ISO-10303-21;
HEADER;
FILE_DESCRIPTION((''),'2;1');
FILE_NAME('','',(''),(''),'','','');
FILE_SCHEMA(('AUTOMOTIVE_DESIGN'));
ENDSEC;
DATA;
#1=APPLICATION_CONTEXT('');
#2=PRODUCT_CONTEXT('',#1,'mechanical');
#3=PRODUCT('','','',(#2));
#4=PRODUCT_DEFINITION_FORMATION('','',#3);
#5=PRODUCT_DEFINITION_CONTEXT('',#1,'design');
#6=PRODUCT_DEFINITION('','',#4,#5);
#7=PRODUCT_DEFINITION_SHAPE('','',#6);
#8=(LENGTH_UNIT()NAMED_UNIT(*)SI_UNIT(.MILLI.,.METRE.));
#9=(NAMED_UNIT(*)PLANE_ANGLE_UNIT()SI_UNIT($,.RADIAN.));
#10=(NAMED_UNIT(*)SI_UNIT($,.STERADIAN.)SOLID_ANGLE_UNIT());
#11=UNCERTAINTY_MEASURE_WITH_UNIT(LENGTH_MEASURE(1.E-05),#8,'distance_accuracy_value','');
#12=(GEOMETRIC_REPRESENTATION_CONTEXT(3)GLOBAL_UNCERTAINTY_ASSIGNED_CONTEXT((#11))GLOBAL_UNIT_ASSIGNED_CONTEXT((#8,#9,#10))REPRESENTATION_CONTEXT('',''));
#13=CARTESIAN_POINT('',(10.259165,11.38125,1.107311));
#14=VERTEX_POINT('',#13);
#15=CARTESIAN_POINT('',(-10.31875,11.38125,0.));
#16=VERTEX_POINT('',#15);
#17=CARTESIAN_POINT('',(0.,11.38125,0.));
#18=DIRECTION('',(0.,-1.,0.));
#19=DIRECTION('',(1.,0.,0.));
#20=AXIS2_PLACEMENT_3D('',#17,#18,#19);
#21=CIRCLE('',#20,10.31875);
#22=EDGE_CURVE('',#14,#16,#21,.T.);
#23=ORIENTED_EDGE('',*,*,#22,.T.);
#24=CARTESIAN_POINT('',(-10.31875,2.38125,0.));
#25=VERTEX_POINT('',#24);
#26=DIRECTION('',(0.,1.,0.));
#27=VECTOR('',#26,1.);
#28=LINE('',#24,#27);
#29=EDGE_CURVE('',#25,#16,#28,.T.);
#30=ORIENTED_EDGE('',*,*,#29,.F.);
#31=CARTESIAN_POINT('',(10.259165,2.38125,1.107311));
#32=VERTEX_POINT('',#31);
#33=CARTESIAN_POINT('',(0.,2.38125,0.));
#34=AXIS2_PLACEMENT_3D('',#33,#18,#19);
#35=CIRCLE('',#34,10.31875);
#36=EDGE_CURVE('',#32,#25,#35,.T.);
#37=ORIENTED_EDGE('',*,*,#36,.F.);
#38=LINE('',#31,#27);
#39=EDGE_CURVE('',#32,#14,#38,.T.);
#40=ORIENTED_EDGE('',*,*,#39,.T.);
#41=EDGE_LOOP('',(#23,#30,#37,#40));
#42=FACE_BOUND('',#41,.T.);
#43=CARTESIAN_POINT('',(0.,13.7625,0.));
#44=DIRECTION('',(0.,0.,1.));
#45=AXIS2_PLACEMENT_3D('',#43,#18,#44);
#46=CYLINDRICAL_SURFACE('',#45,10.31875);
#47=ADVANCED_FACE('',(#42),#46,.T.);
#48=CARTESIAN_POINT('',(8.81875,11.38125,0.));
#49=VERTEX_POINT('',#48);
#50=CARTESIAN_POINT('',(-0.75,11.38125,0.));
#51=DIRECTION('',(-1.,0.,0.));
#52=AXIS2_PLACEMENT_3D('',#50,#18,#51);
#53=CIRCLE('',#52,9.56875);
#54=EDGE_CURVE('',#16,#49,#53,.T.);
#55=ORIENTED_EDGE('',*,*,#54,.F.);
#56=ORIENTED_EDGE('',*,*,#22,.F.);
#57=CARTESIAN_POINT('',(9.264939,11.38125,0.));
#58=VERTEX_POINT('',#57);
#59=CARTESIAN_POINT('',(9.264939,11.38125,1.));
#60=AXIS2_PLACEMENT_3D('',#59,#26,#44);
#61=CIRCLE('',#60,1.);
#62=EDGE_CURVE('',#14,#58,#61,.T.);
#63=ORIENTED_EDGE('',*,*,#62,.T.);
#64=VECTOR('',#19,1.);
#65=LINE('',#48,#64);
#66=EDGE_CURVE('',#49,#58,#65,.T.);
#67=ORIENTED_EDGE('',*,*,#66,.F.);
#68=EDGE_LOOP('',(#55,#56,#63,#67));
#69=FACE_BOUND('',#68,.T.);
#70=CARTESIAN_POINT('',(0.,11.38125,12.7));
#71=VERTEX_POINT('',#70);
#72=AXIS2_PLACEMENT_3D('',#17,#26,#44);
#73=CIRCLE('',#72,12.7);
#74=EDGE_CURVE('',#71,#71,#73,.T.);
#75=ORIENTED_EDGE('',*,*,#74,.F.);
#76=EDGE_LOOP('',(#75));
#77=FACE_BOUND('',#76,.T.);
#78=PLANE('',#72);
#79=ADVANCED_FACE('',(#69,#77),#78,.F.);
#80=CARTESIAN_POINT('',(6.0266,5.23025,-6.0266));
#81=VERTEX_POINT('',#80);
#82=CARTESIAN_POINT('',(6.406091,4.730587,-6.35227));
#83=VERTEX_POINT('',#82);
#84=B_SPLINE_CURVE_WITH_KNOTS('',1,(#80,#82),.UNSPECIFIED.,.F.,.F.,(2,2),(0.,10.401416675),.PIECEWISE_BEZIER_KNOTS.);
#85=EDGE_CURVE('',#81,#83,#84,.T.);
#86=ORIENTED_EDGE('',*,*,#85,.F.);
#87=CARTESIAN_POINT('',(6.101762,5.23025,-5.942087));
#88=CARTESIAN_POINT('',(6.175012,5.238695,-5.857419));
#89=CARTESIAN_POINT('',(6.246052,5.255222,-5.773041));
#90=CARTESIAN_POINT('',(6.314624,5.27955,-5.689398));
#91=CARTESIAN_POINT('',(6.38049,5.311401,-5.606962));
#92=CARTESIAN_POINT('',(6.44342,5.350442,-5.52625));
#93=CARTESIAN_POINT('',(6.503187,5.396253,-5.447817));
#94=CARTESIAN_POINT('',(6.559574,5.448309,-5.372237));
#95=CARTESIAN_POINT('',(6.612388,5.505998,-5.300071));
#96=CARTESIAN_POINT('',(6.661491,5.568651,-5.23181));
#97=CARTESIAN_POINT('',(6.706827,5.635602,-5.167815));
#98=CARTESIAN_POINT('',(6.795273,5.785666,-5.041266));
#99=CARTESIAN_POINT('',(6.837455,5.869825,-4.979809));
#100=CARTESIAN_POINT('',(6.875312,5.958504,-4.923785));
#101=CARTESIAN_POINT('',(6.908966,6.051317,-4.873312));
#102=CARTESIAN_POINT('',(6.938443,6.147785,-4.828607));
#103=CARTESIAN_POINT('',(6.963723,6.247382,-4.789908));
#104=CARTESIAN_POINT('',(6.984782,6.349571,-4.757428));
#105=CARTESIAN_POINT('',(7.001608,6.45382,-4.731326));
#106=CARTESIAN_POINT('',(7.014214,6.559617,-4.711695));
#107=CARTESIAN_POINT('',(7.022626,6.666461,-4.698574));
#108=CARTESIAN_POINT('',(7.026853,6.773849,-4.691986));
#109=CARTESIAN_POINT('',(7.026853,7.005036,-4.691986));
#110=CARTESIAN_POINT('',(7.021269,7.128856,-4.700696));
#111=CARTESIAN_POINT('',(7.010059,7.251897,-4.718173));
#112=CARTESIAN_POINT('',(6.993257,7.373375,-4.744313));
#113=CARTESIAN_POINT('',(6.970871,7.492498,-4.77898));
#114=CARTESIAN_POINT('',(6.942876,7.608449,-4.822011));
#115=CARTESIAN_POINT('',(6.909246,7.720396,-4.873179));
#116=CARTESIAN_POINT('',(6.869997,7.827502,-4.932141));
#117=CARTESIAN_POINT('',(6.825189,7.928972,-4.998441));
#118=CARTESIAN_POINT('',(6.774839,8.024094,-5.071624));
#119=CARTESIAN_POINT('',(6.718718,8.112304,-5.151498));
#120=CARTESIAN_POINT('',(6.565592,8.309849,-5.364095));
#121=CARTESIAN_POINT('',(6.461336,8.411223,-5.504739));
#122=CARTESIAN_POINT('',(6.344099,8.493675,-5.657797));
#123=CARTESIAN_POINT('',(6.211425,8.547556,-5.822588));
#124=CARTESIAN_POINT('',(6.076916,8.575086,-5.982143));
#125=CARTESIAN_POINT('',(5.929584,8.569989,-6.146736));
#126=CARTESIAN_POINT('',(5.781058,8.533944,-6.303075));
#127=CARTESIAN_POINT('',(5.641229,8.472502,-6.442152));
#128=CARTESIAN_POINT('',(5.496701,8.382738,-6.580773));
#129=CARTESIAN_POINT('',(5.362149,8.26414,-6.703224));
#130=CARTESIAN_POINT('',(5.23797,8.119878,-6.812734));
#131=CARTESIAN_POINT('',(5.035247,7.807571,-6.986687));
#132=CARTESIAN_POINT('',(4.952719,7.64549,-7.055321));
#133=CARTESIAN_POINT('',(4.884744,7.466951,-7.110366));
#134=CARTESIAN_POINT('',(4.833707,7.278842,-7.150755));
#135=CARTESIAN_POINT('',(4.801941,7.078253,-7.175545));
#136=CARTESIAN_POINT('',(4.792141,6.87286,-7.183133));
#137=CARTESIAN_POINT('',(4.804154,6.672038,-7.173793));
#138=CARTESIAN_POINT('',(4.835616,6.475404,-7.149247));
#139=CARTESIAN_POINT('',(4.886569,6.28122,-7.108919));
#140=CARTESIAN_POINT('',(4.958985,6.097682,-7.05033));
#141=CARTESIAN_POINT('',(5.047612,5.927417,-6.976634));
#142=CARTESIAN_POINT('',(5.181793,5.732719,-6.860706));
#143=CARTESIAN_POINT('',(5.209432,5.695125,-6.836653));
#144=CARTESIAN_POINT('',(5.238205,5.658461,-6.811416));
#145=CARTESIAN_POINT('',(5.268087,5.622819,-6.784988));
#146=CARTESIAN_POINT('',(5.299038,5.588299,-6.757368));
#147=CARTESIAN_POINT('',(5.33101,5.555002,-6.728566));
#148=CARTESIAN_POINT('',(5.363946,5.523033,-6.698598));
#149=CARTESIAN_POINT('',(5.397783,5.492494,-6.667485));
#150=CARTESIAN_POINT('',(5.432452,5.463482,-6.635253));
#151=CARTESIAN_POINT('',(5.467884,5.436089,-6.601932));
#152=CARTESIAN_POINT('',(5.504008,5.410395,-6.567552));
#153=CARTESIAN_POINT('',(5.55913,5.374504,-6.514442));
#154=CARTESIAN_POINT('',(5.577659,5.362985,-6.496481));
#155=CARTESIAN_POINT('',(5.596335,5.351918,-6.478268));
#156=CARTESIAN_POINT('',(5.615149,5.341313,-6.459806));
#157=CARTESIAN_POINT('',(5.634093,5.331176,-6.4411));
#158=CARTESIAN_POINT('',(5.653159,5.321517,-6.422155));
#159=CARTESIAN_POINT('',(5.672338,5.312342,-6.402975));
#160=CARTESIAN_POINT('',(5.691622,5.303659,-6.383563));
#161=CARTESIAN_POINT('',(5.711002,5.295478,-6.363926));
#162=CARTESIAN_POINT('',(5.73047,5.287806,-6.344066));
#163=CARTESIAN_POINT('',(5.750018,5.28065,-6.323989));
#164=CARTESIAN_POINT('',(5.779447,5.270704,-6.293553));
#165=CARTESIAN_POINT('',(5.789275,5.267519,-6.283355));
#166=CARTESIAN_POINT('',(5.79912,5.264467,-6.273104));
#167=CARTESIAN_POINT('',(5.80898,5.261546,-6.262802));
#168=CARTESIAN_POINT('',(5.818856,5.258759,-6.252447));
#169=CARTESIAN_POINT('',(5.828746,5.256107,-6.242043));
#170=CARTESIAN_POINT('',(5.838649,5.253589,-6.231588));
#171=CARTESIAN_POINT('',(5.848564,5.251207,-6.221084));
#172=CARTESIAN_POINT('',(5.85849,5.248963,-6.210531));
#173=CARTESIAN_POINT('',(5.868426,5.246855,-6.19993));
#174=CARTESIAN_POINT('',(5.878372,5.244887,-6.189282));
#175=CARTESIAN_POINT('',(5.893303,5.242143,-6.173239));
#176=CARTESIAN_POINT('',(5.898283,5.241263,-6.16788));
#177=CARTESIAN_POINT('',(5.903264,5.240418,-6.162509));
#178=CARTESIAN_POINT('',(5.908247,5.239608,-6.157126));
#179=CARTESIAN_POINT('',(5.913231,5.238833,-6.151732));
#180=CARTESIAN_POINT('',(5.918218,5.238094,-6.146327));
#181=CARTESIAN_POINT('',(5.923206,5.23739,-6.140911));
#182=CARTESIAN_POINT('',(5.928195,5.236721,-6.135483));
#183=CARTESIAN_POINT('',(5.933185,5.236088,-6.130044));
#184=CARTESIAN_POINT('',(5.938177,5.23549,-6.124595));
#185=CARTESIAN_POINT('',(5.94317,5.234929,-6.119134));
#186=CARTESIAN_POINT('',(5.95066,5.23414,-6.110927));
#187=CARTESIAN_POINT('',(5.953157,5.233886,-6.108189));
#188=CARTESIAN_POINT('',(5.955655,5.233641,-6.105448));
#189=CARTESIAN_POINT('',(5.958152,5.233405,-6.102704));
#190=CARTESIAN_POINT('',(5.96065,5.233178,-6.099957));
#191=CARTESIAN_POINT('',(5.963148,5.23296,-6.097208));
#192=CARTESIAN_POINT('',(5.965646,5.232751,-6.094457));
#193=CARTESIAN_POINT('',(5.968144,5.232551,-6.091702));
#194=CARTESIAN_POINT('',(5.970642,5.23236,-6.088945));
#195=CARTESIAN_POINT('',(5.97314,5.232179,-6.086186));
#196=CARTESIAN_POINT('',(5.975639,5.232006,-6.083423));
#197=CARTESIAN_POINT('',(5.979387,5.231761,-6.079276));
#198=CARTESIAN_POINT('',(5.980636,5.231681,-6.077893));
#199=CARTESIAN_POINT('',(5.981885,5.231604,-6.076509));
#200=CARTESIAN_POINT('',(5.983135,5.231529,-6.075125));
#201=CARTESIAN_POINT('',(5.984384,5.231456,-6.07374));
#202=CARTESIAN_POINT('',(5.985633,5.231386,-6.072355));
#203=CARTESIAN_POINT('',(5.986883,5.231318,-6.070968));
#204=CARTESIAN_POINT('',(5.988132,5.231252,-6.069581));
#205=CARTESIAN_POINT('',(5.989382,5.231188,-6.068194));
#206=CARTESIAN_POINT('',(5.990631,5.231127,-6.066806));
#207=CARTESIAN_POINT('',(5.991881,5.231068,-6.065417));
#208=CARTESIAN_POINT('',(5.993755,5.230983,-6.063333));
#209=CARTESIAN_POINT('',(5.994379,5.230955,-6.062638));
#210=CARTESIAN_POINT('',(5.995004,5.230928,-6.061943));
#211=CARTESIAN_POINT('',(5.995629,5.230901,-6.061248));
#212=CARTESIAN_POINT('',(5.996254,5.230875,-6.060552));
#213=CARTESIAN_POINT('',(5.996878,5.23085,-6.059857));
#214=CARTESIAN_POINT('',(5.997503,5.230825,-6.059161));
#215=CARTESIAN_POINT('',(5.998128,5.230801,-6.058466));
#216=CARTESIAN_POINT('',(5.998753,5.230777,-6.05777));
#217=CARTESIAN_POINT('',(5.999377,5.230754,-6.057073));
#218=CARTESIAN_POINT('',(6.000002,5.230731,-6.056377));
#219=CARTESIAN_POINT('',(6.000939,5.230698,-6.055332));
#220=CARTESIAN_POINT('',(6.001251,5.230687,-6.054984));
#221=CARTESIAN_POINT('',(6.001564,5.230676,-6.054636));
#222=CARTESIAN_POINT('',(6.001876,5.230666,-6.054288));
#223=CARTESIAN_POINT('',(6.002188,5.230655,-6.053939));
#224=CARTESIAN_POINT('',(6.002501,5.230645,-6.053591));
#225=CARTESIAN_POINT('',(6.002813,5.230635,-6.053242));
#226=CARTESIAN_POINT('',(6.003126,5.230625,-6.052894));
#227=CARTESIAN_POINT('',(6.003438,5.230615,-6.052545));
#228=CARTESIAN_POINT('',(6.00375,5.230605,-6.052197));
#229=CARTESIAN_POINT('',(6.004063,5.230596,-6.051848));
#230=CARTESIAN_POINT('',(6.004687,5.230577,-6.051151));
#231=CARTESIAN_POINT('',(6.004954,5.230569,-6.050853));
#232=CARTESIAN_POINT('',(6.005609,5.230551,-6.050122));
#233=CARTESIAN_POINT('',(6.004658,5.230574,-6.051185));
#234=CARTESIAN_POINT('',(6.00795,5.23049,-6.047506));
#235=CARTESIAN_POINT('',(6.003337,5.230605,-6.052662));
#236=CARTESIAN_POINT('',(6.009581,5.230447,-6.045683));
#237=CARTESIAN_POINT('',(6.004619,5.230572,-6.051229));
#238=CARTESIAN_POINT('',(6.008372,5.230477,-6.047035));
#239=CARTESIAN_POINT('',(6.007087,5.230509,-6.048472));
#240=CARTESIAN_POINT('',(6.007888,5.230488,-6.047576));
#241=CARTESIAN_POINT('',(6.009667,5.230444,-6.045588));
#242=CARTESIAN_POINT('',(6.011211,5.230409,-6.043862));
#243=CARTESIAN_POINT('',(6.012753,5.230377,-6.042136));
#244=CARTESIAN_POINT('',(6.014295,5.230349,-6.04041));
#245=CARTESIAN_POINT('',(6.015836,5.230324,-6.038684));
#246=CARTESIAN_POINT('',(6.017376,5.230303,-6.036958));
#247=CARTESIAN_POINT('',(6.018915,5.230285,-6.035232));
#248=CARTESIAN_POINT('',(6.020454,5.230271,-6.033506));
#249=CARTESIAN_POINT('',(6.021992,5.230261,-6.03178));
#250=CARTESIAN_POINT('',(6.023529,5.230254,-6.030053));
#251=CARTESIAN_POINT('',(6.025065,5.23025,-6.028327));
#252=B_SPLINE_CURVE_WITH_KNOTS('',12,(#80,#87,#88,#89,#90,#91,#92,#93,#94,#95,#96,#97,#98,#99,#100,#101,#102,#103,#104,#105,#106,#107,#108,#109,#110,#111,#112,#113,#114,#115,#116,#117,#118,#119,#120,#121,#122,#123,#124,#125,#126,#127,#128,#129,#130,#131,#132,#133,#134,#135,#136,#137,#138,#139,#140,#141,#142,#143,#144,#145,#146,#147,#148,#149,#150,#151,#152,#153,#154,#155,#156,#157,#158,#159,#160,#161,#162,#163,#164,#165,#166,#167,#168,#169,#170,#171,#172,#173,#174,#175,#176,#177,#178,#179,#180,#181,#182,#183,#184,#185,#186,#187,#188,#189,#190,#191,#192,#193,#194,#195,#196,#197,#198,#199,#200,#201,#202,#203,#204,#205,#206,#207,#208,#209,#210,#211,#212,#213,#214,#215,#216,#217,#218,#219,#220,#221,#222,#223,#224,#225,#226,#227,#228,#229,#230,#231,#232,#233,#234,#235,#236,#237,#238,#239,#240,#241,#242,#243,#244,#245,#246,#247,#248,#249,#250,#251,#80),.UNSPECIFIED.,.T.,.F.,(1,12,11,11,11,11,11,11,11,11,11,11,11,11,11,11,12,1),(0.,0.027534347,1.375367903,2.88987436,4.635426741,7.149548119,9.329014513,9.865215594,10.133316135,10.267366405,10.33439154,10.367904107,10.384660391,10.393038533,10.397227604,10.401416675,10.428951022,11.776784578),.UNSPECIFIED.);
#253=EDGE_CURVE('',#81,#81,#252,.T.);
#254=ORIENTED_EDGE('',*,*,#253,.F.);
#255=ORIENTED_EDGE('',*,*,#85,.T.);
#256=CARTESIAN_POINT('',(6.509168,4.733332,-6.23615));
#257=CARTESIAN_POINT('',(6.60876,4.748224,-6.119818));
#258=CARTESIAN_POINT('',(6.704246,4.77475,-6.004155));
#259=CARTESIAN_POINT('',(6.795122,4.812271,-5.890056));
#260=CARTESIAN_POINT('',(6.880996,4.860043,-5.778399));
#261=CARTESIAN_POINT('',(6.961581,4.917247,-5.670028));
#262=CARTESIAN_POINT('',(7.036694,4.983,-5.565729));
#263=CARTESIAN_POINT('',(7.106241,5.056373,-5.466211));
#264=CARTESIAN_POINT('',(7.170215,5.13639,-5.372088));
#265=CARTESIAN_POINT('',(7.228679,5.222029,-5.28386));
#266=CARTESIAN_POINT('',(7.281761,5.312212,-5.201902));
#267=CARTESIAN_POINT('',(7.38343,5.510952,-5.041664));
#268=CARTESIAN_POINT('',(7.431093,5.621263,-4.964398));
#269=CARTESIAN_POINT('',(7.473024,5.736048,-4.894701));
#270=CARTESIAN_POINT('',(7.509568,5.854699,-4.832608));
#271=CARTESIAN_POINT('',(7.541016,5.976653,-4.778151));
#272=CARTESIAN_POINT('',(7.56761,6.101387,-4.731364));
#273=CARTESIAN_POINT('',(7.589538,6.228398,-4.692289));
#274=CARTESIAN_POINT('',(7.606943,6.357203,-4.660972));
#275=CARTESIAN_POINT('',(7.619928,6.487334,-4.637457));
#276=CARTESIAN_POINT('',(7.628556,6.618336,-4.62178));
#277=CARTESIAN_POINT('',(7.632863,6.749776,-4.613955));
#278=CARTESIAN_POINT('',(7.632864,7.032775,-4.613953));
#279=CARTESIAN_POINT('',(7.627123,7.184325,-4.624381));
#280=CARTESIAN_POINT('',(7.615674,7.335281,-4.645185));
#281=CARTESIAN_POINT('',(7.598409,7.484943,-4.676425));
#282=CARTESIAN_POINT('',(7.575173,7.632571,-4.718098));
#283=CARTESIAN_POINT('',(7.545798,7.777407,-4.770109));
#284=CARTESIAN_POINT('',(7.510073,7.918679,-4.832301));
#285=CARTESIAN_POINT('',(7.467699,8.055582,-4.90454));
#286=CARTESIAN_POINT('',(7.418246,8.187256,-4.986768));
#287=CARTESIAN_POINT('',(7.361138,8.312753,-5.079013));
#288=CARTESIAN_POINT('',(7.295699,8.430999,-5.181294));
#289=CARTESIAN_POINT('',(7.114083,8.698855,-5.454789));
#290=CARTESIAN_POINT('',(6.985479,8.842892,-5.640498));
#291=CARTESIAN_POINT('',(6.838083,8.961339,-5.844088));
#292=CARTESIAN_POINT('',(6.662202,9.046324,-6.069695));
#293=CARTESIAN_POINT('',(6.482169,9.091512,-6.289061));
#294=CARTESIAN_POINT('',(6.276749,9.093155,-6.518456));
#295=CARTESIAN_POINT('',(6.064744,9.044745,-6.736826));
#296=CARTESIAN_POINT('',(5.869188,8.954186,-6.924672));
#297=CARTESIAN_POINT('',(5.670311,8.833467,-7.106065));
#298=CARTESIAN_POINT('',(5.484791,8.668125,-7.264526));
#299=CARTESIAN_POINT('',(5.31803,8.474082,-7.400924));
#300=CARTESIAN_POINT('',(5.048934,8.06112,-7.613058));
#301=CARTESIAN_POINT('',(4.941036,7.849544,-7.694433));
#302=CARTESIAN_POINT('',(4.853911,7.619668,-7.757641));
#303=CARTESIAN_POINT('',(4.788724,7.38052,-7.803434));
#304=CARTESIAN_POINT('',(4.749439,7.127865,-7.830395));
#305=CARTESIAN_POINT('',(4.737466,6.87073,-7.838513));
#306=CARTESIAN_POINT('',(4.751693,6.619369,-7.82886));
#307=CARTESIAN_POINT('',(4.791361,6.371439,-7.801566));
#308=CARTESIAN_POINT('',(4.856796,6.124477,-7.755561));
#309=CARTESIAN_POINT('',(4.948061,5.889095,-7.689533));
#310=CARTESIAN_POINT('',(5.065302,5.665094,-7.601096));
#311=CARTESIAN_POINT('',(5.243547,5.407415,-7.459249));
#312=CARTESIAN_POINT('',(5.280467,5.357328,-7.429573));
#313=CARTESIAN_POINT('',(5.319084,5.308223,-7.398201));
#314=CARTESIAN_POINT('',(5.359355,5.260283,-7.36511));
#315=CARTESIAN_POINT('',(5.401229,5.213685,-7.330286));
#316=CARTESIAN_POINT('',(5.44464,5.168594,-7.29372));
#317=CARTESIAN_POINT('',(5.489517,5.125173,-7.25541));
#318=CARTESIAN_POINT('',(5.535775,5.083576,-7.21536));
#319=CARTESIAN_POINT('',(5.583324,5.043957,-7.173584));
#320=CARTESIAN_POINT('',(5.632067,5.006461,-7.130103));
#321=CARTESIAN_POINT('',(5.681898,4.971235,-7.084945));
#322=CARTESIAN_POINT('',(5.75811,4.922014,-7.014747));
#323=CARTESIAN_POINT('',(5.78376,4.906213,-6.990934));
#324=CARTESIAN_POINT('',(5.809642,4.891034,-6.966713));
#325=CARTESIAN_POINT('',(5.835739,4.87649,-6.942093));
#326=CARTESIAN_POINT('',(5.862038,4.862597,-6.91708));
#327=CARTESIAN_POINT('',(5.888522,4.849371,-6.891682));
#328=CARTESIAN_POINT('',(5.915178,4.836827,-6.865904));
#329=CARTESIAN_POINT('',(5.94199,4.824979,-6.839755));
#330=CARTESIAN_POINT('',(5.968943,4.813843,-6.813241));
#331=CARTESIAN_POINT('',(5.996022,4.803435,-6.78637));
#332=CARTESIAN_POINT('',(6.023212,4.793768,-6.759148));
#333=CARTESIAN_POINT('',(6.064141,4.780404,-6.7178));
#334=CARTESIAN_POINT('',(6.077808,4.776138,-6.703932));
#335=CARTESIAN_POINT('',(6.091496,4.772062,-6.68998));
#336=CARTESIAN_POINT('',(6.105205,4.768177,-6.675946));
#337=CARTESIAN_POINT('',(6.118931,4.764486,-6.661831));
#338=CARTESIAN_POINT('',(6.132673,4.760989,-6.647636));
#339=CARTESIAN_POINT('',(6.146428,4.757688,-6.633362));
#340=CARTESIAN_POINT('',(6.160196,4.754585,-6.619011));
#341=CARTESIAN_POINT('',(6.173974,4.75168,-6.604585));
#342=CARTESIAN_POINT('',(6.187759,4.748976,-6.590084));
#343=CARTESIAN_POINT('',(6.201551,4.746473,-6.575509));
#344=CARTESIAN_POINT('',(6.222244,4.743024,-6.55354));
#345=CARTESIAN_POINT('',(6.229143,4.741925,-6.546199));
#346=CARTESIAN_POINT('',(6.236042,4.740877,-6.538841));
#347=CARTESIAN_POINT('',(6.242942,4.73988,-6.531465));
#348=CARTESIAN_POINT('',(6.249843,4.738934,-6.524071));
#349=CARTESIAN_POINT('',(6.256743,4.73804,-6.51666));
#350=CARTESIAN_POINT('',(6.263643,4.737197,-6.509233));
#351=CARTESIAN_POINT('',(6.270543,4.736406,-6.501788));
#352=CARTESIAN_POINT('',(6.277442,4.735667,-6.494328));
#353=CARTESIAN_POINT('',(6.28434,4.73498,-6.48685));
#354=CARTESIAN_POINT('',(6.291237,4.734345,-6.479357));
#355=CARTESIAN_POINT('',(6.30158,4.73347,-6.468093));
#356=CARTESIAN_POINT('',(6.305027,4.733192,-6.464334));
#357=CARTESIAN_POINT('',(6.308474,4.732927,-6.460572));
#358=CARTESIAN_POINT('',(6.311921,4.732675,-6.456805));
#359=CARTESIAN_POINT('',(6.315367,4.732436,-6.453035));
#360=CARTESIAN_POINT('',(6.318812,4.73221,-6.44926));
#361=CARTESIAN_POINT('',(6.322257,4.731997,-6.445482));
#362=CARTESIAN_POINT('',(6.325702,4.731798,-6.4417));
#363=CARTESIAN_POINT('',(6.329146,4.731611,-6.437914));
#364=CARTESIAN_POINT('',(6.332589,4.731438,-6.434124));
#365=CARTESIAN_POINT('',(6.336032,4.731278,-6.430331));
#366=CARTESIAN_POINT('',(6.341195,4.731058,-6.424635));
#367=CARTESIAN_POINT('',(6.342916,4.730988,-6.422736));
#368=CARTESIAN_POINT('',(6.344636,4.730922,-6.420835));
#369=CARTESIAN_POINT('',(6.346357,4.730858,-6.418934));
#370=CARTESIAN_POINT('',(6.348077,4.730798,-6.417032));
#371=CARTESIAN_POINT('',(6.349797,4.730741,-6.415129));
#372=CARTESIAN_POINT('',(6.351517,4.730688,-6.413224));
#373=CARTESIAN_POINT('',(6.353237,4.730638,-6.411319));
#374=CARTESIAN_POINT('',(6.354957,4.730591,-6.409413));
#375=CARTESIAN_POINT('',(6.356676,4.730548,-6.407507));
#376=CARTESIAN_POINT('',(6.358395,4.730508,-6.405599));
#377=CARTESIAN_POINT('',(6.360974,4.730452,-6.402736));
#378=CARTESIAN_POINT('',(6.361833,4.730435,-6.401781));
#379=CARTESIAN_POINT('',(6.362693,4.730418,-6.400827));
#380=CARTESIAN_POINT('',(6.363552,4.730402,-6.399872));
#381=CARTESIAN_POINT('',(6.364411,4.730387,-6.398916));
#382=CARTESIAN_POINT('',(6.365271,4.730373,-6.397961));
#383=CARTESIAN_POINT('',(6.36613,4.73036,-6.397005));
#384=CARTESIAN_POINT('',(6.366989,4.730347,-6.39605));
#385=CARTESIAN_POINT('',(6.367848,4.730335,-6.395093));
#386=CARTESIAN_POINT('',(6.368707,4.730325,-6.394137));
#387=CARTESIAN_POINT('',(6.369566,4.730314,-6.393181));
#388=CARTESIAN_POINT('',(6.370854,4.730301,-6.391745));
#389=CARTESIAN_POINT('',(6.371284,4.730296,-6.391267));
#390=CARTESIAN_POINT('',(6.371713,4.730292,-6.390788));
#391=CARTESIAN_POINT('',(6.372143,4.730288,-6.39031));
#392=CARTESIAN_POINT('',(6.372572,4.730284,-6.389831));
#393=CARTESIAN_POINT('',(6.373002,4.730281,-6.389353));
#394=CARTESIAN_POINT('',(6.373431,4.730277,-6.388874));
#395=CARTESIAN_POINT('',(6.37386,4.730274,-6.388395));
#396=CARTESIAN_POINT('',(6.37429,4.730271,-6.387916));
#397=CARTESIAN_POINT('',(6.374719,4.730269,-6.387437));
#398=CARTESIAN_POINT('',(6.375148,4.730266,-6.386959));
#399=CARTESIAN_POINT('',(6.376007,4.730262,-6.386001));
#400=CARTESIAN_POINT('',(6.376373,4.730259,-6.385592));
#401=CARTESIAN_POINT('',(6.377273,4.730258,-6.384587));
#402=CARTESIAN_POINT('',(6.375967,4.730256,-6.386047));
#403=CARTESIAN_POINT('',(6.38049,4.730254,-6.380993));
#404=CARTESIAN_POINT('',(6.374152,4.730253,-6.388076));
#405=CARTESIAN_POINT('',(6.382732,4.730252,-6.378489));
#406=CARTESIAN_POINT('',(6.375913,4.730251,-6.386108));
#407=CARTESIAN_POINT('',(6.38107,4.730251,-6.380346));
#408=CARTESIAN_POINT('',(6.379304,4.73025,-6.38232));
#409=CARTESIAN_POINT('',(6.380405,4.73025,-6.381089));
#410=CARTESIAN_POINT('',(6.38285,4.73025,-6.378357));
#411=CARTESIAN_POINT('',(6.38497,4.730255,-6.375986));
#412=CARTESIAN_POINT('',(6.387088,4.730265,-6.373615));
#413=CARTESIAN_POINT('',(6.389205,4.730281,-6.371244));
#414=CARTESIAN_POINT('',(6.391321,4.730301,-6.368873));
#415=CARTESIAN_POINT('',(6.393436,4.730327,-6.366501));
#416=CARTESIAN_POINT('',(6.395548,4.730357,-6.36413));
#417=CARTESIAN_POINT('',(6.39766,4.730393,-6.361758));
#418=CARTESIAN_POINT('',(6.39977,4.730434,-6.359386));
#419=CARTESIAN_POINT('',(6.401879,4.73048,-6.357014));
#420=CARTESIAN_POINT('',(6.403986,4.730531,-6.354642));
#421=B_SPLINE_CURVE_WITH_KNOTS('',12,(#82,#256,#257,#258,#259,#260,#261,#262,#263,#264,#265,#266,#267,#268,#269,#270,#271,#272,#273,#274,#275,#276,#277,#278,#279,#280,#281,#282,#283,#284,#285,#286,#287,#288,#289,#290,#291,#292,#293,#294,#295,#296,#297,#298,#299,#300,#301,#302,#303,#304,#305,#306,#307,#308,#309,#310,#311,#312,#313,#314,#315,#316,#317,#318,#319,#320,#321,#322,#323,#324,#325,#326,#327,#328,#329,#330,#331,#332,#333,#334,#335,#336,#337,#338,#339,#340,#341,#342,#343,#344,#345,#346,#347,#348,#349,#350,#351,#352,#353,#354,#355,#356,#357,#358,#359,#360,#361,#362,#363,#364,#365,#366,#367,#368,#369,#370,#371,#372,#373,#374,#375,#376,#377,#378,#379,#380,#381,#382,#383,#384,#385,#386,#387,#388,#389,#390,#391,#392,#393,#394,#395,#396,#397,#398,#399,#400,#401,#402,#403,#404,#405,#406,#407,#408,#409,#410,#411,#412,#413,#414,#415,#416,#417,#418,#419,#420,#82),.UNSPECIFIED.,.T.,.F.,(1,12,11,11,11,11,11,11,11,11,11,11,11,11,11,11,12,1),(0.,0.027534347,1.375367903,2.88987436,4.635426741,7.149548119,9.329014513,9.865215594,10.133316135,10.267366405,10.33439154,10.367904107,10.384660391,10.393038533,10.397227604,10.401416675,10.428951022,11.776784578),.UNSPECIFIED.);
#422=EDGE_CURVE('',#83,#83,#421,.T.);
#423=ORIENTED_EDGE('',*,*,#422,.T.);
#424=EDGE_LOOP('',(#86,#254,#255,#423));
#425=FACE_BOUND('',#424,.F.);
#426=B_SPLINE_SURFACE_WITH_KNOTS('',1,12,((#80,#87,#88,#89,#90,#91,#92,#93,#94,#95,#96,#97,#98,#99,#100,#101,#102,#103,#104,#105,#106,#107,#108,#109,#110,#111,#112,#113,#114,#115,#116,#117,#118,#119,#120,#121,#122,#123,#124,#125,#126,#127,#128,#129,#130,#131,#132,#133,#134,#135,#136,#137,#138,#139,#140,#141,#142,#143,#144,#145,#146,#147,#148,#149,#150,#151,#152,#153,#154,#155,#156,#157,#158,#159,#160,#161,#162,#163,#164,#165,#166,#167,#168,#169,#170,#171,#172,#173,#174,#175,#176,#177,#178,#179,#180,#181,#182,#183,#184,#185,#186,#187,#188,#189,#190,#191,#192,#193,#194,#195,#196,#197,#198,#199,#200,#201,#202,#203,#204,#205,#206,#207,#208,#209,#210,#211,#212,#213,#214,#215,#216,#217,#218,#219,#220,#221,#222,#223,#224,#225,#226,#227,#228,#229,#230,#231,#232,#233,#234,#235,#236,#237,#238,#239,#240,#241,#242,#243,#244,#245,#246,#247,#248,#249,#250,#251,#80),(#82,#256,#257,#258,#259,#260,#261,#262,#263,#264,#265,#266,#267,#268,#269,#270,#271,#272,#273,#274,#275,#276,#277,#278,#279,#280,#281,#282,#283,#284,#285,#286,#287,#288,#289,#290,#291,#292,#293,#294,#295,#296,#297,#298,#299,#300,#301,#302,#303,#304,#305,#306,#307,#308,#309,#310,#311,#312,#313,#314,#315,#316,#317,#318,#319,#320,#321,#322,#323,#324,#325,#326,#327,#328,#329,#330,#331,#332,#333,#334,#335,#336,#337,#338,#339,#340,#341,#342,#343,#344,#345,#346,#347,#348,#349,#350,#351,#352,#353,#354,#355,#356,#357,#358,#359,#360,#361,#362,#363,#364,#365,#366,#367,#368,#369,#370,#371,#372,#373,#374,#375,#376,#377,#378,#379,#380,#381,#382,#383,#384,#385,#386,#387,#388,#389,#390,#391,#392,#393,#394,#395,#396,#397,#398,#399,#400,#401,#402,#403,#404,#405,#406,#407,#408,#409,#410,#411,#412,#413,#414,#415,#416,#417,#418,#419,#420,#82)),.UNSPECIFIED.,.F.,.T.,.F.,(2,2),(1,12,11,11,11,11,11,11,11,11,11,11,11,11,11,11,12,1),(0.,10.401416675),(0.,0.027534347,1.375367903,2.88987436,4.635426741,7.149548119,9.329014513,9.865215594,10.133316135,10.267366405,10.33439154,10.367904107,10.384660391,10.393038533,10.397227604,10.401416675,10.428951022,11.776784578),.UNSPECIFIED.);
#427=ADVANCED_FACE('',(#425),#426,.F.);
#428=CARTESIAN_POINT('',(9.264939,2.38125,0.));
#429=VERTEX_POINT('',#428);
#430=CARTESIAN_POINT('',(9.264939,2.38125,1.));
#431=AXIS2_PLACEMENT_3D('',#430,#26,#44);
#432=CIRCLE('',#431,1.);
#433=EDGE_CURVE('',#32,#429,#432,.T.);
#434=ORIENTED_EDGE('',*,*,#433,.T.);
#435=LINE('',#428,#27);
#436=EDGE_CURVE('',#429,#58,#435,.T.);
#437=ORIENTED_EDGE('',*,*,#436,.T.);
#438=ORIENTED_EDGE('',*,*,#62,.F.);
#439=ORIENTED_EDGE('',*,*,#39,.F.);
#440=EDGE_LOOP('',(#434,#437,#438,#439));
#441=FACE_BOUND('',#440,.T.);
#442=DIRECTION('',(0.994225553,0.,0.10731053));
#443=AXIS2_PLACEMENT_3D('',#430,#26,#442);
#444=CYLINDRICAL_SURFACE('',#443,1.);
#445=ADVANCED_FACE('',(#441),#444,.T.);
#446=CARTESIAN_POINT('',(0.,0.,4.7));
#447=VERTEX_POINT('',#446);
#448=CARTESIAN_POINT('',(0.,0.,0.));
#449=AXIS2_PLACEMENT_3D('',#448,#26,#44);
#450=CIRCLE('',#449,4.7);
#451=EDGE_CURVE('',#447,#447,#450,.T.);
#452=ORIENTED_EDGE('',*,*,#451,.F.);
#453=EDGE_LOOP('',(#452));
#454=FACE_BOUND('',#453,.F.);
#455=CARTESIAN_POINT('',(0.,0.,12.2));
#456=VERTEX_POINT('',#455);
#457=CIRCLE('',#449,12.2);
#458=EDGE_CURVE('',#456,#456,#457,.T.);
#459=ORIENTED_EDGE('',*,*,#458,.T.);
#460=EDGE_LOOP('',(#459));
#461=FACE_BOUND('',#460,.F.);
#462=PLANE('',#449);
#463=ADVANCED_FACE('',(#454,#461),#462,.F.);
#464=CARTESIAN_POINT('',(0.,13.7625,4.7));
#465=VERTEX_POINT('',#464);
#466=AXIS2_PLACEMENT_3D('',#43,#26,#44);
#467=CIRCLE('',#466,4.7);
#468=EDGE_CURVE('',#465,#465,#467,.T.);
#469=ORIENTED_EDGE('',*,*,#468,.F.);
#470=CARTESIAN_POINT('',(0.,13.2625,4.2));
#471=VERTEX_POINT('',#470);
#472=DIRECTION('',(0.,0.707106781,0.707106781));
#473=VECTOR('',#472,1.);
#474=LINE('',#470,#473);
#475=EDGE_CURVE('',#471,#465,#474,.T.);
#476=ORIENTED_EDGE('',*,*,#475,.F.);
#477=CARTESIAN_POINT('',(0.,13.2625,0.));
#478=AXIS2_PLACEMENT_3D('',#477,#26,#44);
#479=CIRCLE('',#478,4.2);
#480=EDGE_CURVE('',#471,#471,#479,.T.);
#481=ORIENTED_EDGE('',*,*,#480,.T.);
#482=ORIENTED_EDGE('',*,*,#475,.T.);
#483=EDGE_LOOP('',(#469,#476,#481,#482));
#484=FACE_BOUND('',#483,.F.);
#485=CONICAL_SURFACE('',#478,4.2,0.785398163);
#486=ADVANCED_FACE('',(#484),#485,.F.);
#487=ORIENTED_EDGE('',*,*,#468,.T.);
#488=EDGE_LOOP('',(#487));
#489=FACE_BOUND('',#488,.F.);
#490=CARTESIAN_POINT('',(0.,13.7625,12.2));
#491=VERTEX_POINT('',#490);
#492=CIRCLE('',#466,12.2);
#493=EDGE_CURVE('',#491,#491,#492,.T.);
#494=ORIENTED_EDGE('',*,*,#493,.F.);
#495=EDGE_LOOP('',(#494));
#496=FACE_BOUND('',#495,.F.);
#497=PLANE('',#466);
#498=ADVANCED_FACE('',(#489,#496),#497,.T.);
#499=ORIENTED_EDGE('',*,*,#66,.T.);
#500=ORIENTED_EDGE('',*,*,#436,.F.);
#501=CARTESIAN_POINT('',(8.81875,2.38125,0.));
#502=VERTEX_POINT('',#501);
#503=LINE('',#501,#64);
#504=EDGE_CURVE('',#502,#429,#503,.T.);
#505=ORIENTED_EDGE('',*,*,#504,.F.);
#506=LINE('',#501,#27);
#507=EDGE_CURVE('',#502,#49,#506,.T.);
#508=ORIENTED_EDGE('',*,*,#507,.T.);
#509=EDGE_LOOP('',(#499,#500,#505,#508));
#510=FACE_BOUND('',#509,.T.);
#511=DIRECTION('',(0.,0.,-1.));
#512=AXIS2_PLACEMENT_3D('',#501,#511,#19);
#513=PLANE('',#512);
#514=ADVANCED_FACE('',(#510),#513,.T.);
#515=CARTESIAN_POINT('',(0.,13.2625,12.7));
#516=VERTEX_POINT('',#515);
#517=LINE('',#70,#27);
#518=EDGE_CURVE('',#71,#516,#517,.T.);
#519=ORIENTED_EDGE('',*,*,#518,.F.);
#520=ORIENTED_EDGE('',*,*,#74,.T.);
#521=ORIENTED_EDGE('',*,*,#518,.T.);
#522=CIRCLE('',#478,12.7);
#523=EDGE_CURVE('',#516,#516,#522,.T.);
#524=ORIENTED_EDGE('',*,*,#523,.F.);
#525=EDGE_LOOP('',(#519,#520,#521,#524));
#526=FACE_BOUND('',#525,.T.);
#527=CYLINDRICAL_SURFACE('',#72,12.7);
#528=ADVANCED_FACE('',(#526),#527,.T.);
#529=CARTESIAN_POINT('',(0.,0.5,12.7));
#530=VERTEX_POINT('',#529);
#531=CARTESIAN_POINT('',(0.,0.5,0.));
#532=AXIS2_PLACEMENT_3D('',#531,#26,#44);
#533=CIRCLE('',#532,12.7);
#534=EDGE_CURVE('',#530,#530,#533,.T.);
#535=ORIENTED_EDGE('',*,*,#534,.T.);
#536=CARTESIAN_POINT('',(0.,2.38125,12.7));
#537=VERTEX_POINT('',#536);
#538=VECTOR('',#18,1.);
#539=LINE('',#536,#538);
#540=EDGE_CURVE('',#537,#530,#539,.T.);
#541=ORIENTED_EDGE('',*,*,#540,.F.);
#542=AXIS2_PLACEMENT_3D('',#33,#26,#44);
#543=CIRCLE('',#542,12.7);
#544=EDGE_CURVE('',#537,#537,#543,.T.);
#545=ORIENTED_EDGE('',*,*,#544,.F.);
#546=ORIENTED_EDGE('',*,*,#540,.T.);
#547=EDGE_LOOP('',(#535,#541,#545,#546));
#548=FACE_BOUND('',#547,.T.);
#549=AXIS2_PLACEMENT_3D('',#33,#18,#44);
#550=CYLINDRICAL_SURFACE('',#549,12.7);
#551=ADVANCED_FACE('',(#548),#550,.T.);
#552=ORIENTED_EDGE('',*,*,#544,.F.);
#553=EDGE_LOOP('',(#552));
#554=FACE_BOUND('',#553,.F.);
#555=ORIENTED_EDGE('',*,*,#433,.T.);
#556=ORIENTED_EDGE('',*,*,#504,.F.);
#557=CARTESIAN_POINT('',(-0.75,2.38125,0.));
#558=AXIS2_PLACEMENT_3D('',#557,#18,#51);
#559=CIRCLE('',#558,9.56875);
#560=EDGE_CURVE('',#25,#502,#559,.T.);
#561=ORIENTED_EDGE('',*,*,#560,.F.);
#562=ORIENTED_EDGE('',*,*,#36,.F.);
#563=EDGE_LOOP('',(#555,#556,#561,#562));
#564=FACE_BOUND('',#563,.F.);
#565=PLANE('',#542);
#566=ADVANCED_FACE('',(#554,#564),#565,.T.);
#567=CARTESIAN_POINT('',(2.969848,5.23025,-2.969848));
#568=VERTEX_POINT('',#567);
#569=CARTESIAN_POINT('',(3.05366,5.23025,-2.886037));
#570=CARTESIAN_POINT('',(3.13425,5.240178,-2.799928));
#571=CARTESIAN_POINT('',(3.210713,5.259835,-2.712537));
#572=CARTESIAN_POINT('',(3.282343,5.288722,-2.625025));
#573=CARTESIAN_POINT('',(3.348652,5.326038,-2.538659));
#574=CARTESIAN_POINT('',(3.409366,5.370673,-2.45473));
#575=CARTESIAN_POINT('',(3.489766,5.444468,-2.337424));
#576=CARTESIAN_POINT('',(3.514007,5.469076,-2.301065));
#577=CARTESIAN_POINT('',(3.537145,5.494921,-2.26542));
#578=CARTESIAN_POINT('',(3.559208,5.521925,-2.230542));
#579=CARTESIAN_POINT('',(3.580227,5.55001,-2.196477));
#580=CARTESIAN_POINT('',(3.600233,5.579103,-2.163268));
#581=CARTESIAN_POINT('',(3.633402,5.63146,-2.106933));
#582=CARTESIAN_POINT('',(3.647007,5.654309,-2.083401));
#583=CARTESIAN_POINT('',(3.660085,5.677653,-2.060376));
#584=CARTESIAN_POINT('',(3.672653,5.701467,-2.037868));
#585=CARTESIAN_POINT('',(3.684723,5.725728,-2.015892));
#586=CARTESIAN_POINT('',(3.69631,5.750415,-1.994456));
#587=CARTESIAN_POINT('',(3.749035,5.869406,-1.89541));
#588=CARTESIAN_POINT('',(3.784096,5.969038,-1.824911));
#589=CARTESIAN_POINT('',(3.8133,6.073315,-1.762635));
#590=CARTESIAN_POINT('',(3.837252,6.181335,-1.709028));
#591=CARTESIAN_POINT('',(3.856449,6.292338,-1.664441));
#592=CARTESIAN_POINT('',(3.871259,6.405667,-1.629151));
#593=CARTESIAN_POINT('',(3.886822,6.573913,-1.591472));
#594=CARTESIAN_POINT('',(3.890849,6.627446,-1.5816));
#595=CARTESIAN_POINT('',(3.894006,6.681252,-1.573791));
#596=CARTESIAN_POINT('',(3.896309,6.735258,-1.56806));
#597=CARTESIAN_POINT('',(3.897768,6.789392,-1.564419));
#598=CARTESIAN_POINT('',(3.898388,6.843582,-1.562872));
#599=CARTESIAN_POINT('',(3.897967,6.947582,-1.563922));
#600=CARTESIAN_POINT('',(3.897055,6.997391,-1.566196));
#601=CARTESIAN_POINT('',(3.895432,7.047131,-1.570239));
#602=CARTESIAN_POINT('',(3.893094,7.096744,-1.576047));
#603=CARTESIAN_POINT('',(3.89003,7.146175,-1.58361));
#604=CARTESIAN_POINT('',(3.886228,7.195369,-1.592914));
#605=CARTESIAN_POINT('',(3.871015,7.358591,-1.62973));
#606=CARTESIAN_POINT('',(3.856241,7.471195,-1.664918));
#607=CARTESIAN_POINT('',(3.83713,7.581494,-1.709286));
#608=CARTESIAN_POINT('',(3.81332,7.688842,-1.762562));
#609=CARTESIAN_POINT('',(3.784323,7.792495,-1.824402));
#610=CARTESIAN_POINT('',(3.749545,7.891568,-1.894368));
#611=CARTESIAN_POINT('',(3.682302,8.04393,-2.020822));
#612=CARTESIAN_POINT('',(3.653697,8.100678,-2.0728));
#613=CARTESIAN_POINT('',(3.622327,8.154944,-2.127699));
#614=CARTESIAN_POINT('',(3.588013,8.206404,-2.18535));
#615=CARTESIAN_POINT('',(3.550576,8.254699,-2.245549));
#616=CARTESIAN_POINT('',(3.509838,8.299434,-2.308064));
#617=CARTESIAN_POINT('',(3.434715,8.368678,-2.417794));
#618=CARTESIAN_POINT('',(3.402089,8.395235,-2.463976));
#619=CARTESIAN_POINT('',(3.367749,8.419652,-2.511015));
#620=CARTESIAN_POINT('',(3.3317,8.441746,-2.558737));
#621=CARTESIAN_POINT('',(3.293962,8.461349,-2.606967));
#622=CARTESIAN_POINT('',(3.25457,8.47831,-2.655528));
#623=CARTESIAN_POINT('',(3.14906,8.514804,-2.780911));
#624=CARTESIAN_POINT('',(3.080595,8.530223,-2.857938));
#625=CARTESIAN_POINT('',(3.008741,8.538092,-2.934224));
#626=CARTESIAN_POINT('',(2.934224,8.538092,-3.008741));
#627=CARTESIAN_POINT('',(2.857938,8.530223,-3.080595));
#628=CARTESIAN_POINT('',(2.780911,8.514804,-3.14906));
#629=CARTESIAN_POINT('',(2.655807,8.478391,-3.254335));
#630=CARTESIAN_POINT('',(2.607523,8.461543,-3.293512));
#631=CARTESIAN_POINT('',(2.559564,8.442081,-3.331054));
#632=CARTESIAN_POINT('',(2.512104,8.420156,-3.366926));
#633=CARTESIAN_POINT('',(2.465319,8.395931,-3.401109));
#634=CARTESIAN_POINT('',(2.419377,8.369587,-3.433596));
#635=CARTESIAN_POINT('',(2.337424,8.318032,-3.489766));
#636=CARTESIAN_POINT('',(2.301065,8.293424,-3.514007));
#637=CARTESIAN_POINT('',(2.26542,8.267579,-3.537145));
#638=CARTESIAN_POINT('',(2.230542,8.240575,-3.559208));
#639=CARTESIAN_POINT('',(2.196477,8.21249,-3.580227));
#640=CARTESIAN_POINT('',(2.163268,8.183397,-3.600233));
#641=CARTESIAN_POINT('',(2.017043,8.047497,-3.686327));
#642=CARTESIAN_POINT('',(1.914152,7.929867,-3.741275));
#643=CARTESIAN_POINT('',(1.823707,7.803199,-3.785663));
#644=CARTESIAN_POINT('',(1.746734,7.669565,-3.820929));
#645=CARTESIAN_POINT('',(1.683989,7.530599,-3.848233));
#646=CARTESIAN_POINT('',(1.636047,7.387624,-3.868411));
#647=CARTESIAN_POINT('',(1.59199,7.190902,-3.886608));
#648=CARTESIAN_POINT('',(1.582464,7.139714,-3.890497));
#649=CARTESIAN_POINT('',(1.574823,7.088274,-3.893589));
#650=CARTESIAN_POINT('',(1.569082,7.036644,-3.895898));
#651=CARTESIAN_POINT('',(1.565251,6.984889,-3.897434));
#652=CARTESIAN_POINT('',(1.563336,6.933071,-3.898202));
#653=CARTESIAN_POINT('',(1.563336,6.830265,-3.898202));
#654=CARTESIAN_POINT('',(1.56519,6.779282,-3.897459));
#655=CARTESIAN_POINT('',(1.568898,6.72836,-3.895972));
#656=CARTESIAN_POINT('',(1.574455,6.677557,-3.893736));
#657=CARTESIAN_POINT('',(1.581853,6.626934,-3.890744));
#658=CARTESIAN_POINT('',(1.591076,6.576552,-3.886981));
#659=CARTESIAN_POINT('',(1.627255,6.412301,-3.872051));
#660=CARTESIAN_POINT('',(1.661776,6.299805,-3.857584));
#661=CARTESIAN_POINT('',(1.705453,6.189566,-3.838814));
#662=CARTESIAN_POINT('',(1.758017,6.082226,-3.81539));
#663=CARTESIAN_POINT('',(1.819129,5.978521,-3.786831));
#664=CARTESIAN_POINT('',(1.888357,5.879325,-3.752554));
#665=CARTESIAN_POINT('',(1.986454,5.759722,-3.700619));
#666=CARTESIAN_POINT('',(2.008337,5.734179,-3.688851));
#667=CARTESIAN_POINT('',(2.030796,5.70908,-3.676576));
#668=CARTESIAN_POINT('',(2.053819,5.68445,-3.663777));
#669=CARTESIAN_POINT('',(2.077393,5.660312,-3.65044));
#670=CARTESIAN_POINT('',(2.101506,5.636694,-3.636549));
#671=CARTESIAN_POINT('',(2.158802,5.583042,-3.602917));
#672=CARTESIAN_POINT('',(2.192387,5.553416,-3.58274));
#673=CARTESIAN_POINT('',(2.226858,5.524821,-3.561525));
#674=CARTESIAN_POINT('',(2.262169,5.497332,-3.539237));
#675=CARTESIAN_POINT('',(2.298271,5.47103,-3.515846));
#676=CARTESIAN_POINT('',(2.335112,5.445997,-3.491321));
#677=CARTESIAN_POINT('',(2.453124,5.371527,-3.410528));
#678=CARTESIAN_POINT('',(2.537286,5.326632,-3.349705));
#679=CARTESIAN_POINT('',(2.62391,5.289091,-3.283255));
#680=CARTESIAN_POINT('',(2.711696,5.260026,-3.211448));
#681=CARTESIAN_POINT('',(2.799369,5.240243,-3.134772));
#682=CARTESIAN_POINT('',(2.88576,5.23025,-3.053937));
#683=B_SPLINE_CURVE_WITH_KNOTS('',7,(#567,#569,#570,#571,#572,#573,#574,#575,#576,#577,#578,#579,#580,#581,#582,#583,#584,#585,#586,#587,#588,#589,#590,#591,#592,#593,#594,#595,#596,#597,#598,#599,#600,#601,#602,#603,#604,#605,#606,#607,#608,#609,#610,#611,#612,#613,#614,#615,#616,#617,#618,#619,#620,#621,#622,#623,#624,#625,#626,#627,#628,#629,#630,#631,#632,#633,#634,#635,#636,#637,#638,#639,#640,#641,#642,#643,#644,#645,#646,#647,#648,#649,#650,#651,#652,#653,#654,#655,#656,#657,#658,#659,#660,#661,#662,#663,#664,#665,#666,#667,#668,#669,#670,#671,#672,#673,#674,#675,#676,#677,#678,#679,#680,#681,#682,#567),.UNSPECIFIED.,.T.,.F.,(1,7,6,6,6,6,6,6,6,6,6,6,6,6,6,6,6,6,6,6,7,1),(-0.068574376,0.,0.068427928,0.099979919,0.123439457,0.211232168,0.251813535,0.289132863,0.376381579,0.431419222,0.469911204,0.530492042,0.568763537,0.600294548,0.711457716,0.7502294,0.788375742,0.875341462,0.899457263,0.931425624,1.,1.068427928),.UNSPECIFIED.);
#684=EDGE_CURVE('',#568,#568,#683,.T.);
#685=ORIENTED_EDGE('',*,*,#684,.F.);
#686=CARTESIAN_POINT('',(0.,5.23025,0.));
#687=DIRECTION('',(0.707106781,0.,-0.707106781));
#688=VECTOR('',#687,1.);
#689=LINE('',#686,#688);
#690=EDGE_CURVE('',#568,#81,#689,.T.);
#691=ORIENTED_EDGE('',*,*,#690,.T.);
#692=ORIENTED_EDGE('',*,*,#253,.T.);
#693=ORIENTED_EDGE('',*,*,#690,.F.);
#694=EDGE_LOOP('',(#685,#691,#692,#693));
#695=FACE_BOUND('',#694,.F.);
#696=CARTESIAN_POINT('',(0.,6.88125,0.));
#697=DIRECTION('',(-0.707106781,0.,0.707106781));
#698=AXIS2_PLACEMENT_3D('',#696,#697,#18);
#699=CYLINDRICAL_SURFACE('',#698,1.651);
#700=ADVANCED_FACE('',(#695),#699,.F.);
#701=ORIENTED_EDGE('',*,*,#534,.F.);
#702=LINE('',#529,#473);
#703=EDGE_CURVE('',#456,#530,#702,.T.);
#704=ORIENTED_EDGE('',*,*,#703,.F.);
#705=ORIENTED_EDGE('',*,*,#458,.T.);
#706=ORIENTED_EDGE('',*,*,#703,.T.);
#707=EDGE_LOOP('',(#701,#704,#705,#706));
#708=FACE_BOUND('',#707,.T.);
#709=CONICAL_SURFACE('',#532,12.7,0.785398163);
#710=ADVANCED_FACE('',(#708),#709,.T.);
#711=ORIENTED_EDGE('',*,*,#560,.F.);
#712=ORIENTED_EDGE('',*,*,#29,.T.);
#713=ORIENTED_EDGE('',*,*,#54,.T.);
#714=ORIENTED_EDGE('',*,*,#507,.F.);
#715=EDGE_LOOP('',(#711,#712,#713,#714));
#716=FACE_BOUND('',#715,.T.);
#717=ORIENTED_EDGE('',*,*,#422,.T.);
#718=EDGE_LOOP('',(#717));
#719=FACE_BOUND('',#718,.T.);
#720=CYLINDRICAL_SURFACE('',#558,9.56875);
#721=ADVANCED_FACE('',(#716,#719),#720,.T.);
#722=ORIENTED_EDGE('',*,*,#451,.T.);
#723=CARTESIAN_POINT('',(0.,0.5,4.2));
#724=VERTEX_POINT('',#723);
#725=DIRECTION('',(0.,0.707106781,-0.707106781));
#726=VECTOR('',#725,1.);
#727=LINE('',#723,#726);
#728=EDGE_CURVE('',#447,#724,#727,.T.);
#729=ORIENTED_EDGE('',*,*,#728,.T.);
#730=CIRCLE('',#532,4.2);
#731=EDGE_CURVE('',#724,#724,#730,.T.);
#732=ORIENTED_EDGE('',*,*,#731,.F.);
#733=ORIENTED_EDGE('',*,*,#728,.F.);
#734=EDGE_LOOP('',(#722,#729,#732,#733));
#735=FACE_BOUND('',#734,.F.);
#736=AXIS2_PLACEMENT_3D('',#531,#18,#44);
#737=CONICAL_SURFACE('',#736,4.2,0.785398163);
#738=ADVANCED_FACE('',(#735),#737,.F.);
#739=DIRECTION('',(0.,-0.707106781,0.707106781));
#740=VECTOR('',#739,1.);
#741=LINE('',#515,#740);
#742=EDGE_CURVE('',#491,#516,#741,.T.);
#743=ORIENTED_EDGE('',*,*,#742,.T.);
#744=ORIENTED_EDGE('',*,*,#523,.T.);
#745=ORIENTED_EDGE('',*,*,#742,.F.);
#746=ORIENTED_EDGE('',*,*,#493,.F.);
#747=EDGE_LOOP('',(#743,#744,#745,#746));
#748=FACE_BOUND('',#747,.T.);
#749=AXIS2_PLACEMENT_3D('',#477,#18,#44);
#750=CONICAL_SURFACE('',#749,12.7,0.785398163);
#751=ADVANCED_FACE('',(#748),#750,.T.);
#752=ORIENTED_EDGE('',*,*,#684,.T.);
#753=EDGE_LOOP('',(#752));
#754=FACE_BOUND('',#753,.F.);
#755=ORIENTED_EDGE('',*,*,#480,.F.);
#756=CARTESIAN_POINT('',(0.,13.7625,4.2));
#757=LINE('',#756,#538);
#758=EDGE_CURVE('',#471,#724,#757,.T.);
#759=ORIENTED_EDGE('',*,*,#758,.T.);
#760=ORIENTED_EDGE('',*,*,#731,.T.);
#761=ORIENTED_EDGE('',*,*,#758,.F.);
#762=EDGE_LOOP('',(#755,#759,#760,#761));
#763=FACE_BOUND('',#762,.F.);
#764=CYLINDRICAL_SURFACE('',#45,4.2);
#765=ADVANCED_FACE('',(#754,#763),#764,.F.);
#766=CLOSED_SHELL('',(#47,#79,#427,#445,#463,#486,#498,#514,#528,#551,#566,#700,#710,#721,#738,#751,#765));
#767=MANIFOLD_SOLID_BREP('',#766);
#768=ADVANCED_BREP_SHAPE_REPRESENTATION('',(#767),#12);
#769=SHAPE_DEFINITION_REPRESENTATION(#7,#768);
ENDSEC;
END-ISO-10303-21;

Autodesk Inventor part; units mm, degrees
ref_plane "XZ Plane" through (0, 0, 0) normal (0, 1, 0) x (-1, 0, 0)
sketch "Sketch1" plane through (0, 0, 0) normal (1, 0, 0) x (0, 1, 0)
  line L0 (0, 0) -> (13.7625, 0)
  line L1 (13.7625, 0) -> (13.7625, 10.31875)
  line L2 (13.7625, 10.31875) -> (0, 10.31875)
  line L3 (0, 10.31875) -> (0, 0)
  line L4 (13.7625, 10.31875) -> (11.38125, 10.31875)
  line L5 (11.38125, 10.31875) -> (11.38125, 12.7)
  line L6 (11.38125, 12.7) -> (13.7625, 12.7)
  line L7 (13.7625, 12.7) -> (13.7625, 10.31875)
  line L8 (0, 10.31875) -> (2.38125, 10.31875)
  line L9 (2.38125, 10.31875) -> (2.38125, 12.7)
  line L10 (2.38125, 12.7) -> (0, 12.7)
  line L11 (0, 12.7) -> (0, 10.31875)
  line L12 (13.7625, 4.2) -> (0, 4.2)
  line L13 (0, 4.2) -> (0, 0)
  line L14 (0, 0) -> (13.7625, 0)
  line L15 (13.7625, 0) -> (13.7625, 4.2)
  point P0 (0, 4.2)
  dimension "d1" = 10.31875
  dimension "d2" = 2.38125
  dimension "d3" = 2.38125
  dimension "d4" = 12.7
  dimension "d5" = 4.2
  dimension "d29" = 9
revolve "Revolution1" add sketch "Sketch1" angle 360 about axis through (0, 0, 0) along (0, 1, 0) contours L3 L2 L1 L12 | L11 L10 L9 L2 | L2 L5 L6 L7
sketch "Sketch2" plane through (0, 2.38125, 0) normal (0, 1, 0) x (1, 0, 0)
  circle A0 centre (0, 0) radius 4.2
  circle A1 centre (0, 0) radius 6.2
  line L0 (4.2, 0) -> (6.2, 0)
  line L1 (0, 4.2) -> (0, 6.2)
  circle A2 centre (0, 0) radius 10.31875
  line L2 (0, 6.2) -> (-9.425317, 6.2)
  line L3 (-9.425317, 6.2) -> (-9.425317, 4.2)
  line L4 (-9.425317, 4.2) -> (0, 4.2)
  line L5 (0, 4.2) -> (0, 6.2)
  line L6 (10.31875, 0) -> (8.81875, 0)
  arc A3 (8.81875, 0) -> (-10.31875, 0) centre (-0.75, 0) ccw
  dimension "d7" = 2
  dimension "d30" = 1.5
sketch "Sketch2 outline for Extrusion1" plane through (0, 2.38125, 0) normal (0, 1, 0) x (1, 0, 0)
  arc A0 (-10.31875, 0) -> (8.81875, 0) centre (-0.75, 0) cw
  arc A1 (10.31875, 0) -> (-10.31875, 0) centre (0, 0) ccw
  line L0 (8.81875, 0) -> (10.31875, 0)
extrude "Extrusion1" cut sketch "Sketch2 outline for Extrusion1" along normal up to surface (9 mm away)
ref_plane "Work Plane1" through (0, 0, 0) normal (-0.7071068, 0, 0.7071068) x (0, -1, 0)
sketch "Sketch3" plane through (0, 0, 0) normal (-0.7071068, 0, 0.7071068) x (0, -1, 0)
  line L0 (0, 0) -> (-13.7625, 0) construction
  line L1 (-13.7625, 4.2) -> (-13.7625, -4.2)
  circle A0 centre (-6.88125, 0) radius 1.651
  dimension "d12" = 3.302
extrude "Extrusion2" cut sketch "Sketch3" against normal through all
chamfer "Chamfer1" distance 0.5 angle 45 2 edges at (0, 0, -4.2) (0, 13.7625, -4.2)
chamfer "Chamfer2" distance 0.5 angle 45 1 edges at (6.7558, 8.4269, -5.935)
chamfer "Chamfer3" distance 0.5 angle 45 2 edges at (0, 13.7625, -12.7) (0, 0, -12.7)
fillet "Fillet3" radius 1 1 edges at (10.3188, 6.8812, 0)
equation "\"d3\" = d2"
properties part number "Spring Spool" material "Nylon 6/6"
